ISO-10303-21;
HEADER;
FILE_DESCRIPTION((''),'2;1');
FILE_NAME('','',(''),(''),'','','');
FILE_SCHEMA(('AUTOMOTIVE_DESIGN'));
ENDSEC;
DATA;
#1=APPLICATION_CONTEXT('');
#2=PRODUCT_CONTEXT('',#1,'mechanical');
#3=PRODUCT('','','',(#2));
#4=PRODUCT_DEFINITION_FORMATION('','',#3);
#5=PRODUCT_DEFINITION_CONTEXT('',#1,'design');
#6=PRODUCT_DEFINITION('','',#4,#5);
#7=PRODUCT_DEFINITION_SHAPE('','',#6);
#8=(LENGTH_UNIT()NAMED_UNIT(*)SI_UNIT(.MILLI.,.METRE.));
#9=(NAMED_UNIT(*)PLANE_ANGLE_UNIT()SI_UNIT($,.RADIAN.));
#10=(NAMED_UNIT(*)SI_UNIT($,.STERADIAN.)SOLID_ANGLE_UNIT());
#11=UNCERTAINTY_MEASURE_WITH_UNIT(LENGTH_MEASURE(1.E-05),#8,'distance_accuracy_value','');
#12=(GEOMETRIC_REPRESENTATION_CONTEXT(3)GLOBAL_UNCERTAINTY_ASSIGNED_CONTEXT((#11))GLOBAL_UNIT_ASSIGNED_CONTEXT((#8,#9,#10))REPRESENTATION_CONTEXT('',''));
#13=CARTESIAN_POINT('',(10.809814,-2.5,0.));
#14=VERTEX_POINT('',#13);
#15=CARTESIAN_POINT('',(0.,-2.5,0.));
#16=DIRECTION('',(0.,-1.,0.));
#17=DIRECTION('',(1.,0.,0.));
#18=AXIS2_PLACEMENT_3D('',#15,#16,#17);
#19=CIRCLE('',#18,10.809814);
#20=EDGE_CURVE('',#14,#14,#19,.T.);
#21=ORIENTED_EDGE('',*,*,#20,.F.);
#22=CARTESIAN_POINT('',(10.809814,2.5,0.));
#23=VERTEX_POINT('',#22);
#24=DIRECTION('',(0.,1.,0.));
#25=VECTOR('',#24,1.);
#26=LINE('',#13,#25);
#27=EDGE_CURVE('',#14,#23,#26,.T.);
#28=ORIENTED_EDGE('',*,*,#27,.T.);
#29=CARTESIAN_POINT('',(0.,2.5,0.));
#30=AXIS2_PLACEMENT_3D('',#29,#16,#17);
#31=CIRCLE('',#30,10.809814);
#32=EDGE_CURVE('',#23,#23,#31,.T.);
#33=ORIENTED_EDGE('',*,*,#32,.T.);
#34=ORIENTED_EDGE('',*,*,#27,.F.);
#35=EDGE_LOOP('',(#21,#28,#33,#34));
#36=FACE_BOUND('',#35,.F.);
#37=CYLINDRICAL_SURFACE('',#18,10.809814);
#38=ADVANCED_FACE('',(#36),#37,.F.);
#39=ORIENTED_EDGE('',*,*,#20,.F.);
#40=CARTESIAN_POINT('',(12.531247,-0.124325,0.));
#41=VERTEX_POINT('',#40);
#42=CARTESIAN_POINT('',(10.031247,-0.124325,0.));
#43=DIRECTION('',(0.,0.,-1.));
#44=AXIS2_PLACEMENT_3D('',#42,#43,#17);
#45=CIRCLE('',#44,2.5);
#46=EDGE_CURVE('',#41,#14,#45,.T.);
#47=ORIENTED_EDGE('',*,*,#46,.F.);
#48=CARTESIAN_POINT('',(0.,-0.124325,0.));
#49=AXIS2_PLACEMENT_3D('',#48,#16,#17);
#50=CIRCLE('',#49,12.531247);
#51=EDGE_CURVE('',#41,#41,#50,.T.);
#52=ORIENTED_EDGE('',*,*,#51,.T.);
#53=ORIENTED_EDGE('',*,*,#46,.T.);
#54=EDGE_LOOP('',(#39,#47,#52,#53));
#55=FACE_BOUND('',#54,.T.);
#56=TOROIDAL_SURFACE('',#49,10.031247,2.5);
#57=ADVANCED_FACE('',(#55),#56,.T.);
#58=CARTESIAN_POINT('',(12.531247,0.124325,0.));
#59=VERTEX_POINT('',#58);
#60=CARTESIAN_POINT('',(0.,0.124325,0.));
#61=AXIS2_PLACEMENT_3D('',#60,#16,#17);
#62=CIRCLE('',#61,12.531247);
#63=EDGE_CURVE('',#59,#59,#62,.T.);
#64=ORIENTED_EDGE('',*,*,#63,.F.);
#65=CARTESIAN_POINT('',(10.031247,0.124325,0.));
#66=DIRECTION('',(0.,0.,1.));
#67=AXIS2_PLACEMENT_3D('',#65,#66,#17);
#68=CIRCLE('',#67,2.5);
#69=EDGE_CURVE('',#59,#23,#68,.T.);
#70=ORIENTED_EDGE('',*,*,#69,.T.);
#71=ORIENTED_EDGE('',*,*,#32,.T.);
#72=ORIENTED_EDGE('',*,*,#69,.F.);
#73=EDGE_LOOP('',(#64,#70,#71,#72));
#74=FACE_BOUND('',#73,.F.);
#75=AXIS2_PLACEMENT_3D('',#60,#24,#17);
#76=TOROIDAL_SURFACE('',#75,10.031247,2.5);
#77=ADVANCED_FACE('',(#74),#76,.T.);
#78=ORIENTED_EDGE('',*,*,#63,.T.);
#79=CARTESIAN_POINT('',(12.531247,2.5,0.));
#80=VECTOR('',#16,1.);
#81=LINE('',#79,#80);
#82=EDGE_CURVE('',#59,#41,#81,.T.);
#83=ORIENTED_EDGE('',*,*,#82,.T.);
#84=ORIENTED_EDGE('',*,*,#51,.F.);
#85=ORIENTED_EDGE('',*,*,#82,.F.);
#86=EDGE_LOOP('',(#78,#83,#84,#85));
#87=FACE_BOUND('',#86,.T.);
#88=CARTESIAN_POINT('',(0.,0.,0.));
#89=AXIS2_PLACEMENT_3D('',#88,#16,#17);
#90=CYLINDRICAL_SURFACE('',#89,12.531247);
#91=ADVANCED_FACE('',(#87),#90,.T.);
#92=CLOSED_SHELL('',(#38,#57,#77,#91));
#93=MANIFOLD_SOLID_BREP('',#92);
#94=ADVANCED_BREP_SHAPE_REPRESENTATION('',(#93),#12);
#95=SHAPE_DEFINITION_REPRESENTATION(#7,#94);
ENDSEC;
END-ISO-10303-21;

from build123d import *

# Parameters (mm, degrees)
F0_R     = 12.5312471482
F1_DEPTH = 2.5
F2_R     = 10.8098139949
F3_DEPTH = 75.98543


# Not quite as in the source:
# - a fillet or chamfer that OpenCascade refuses, or shapes differently, is made with other operations: its cross-section is extruded or revolved along the edge and cut away or added


with BuildPart() as f1:
    # F0 (on Front) → F1 (new body, symmetric)
    with BuildSketch(Plane.XZ):
        Circle(F0_R)
    extrude(amount=F1_DEPTH, both=True)

    # F2 (on face) → F3 (cut)
    with BuildSketch(Plane.XZ.offset(2.5)):
        Circle(F2_R)
    extrude(amount=-F3_DEPTH, mode=Mode.SUBTRACT)

    # F4: fillet of radius 2.5 on 1 edges, made by hand

    # F4_s1 → F4_t2 (revolve, cut)
    with BuildSketch(Plane.XY):
        with BuildLine():
            ThreePointArc((12.5312471482, -0.1243245876), (12.055650408, -1.5912231668), (10.8098139949, -2.5))
            Line((10.8098139949, -2.5), (12.5312471482, -2.5))
            Line((12.5312471482, -2.5), (12.5312471482, -0.1243245876))
        make_face()
    revolve(axis=Axis((0, -2.5, 0), (0, -1, 0)), mode=Mode.SUBTRACT)

    # F5: fillet of radius 2.5 on 1 edges, made by hand

    # F5_s1 → F5_t2 (revolve, cut)
    with BuildSketch(Plane.XY):
        with BuildLine():
            ThreePointArc((12.5312471482, 0.1243245876), (12.055650408, 1.5912231668), (10.8098139949, 2.5))
            Line((10.8098139949, 2.5), (12.5312471482, 2.5))
            Line((12.5312471482, 2.5), (12.5312471482, 0.1243245876))
        make_face()
    revolve(axis=Axis((0, 2.5, 0), (0, -1, 0)), mode=Mode.SUBTRACT)


solid = f1.part
